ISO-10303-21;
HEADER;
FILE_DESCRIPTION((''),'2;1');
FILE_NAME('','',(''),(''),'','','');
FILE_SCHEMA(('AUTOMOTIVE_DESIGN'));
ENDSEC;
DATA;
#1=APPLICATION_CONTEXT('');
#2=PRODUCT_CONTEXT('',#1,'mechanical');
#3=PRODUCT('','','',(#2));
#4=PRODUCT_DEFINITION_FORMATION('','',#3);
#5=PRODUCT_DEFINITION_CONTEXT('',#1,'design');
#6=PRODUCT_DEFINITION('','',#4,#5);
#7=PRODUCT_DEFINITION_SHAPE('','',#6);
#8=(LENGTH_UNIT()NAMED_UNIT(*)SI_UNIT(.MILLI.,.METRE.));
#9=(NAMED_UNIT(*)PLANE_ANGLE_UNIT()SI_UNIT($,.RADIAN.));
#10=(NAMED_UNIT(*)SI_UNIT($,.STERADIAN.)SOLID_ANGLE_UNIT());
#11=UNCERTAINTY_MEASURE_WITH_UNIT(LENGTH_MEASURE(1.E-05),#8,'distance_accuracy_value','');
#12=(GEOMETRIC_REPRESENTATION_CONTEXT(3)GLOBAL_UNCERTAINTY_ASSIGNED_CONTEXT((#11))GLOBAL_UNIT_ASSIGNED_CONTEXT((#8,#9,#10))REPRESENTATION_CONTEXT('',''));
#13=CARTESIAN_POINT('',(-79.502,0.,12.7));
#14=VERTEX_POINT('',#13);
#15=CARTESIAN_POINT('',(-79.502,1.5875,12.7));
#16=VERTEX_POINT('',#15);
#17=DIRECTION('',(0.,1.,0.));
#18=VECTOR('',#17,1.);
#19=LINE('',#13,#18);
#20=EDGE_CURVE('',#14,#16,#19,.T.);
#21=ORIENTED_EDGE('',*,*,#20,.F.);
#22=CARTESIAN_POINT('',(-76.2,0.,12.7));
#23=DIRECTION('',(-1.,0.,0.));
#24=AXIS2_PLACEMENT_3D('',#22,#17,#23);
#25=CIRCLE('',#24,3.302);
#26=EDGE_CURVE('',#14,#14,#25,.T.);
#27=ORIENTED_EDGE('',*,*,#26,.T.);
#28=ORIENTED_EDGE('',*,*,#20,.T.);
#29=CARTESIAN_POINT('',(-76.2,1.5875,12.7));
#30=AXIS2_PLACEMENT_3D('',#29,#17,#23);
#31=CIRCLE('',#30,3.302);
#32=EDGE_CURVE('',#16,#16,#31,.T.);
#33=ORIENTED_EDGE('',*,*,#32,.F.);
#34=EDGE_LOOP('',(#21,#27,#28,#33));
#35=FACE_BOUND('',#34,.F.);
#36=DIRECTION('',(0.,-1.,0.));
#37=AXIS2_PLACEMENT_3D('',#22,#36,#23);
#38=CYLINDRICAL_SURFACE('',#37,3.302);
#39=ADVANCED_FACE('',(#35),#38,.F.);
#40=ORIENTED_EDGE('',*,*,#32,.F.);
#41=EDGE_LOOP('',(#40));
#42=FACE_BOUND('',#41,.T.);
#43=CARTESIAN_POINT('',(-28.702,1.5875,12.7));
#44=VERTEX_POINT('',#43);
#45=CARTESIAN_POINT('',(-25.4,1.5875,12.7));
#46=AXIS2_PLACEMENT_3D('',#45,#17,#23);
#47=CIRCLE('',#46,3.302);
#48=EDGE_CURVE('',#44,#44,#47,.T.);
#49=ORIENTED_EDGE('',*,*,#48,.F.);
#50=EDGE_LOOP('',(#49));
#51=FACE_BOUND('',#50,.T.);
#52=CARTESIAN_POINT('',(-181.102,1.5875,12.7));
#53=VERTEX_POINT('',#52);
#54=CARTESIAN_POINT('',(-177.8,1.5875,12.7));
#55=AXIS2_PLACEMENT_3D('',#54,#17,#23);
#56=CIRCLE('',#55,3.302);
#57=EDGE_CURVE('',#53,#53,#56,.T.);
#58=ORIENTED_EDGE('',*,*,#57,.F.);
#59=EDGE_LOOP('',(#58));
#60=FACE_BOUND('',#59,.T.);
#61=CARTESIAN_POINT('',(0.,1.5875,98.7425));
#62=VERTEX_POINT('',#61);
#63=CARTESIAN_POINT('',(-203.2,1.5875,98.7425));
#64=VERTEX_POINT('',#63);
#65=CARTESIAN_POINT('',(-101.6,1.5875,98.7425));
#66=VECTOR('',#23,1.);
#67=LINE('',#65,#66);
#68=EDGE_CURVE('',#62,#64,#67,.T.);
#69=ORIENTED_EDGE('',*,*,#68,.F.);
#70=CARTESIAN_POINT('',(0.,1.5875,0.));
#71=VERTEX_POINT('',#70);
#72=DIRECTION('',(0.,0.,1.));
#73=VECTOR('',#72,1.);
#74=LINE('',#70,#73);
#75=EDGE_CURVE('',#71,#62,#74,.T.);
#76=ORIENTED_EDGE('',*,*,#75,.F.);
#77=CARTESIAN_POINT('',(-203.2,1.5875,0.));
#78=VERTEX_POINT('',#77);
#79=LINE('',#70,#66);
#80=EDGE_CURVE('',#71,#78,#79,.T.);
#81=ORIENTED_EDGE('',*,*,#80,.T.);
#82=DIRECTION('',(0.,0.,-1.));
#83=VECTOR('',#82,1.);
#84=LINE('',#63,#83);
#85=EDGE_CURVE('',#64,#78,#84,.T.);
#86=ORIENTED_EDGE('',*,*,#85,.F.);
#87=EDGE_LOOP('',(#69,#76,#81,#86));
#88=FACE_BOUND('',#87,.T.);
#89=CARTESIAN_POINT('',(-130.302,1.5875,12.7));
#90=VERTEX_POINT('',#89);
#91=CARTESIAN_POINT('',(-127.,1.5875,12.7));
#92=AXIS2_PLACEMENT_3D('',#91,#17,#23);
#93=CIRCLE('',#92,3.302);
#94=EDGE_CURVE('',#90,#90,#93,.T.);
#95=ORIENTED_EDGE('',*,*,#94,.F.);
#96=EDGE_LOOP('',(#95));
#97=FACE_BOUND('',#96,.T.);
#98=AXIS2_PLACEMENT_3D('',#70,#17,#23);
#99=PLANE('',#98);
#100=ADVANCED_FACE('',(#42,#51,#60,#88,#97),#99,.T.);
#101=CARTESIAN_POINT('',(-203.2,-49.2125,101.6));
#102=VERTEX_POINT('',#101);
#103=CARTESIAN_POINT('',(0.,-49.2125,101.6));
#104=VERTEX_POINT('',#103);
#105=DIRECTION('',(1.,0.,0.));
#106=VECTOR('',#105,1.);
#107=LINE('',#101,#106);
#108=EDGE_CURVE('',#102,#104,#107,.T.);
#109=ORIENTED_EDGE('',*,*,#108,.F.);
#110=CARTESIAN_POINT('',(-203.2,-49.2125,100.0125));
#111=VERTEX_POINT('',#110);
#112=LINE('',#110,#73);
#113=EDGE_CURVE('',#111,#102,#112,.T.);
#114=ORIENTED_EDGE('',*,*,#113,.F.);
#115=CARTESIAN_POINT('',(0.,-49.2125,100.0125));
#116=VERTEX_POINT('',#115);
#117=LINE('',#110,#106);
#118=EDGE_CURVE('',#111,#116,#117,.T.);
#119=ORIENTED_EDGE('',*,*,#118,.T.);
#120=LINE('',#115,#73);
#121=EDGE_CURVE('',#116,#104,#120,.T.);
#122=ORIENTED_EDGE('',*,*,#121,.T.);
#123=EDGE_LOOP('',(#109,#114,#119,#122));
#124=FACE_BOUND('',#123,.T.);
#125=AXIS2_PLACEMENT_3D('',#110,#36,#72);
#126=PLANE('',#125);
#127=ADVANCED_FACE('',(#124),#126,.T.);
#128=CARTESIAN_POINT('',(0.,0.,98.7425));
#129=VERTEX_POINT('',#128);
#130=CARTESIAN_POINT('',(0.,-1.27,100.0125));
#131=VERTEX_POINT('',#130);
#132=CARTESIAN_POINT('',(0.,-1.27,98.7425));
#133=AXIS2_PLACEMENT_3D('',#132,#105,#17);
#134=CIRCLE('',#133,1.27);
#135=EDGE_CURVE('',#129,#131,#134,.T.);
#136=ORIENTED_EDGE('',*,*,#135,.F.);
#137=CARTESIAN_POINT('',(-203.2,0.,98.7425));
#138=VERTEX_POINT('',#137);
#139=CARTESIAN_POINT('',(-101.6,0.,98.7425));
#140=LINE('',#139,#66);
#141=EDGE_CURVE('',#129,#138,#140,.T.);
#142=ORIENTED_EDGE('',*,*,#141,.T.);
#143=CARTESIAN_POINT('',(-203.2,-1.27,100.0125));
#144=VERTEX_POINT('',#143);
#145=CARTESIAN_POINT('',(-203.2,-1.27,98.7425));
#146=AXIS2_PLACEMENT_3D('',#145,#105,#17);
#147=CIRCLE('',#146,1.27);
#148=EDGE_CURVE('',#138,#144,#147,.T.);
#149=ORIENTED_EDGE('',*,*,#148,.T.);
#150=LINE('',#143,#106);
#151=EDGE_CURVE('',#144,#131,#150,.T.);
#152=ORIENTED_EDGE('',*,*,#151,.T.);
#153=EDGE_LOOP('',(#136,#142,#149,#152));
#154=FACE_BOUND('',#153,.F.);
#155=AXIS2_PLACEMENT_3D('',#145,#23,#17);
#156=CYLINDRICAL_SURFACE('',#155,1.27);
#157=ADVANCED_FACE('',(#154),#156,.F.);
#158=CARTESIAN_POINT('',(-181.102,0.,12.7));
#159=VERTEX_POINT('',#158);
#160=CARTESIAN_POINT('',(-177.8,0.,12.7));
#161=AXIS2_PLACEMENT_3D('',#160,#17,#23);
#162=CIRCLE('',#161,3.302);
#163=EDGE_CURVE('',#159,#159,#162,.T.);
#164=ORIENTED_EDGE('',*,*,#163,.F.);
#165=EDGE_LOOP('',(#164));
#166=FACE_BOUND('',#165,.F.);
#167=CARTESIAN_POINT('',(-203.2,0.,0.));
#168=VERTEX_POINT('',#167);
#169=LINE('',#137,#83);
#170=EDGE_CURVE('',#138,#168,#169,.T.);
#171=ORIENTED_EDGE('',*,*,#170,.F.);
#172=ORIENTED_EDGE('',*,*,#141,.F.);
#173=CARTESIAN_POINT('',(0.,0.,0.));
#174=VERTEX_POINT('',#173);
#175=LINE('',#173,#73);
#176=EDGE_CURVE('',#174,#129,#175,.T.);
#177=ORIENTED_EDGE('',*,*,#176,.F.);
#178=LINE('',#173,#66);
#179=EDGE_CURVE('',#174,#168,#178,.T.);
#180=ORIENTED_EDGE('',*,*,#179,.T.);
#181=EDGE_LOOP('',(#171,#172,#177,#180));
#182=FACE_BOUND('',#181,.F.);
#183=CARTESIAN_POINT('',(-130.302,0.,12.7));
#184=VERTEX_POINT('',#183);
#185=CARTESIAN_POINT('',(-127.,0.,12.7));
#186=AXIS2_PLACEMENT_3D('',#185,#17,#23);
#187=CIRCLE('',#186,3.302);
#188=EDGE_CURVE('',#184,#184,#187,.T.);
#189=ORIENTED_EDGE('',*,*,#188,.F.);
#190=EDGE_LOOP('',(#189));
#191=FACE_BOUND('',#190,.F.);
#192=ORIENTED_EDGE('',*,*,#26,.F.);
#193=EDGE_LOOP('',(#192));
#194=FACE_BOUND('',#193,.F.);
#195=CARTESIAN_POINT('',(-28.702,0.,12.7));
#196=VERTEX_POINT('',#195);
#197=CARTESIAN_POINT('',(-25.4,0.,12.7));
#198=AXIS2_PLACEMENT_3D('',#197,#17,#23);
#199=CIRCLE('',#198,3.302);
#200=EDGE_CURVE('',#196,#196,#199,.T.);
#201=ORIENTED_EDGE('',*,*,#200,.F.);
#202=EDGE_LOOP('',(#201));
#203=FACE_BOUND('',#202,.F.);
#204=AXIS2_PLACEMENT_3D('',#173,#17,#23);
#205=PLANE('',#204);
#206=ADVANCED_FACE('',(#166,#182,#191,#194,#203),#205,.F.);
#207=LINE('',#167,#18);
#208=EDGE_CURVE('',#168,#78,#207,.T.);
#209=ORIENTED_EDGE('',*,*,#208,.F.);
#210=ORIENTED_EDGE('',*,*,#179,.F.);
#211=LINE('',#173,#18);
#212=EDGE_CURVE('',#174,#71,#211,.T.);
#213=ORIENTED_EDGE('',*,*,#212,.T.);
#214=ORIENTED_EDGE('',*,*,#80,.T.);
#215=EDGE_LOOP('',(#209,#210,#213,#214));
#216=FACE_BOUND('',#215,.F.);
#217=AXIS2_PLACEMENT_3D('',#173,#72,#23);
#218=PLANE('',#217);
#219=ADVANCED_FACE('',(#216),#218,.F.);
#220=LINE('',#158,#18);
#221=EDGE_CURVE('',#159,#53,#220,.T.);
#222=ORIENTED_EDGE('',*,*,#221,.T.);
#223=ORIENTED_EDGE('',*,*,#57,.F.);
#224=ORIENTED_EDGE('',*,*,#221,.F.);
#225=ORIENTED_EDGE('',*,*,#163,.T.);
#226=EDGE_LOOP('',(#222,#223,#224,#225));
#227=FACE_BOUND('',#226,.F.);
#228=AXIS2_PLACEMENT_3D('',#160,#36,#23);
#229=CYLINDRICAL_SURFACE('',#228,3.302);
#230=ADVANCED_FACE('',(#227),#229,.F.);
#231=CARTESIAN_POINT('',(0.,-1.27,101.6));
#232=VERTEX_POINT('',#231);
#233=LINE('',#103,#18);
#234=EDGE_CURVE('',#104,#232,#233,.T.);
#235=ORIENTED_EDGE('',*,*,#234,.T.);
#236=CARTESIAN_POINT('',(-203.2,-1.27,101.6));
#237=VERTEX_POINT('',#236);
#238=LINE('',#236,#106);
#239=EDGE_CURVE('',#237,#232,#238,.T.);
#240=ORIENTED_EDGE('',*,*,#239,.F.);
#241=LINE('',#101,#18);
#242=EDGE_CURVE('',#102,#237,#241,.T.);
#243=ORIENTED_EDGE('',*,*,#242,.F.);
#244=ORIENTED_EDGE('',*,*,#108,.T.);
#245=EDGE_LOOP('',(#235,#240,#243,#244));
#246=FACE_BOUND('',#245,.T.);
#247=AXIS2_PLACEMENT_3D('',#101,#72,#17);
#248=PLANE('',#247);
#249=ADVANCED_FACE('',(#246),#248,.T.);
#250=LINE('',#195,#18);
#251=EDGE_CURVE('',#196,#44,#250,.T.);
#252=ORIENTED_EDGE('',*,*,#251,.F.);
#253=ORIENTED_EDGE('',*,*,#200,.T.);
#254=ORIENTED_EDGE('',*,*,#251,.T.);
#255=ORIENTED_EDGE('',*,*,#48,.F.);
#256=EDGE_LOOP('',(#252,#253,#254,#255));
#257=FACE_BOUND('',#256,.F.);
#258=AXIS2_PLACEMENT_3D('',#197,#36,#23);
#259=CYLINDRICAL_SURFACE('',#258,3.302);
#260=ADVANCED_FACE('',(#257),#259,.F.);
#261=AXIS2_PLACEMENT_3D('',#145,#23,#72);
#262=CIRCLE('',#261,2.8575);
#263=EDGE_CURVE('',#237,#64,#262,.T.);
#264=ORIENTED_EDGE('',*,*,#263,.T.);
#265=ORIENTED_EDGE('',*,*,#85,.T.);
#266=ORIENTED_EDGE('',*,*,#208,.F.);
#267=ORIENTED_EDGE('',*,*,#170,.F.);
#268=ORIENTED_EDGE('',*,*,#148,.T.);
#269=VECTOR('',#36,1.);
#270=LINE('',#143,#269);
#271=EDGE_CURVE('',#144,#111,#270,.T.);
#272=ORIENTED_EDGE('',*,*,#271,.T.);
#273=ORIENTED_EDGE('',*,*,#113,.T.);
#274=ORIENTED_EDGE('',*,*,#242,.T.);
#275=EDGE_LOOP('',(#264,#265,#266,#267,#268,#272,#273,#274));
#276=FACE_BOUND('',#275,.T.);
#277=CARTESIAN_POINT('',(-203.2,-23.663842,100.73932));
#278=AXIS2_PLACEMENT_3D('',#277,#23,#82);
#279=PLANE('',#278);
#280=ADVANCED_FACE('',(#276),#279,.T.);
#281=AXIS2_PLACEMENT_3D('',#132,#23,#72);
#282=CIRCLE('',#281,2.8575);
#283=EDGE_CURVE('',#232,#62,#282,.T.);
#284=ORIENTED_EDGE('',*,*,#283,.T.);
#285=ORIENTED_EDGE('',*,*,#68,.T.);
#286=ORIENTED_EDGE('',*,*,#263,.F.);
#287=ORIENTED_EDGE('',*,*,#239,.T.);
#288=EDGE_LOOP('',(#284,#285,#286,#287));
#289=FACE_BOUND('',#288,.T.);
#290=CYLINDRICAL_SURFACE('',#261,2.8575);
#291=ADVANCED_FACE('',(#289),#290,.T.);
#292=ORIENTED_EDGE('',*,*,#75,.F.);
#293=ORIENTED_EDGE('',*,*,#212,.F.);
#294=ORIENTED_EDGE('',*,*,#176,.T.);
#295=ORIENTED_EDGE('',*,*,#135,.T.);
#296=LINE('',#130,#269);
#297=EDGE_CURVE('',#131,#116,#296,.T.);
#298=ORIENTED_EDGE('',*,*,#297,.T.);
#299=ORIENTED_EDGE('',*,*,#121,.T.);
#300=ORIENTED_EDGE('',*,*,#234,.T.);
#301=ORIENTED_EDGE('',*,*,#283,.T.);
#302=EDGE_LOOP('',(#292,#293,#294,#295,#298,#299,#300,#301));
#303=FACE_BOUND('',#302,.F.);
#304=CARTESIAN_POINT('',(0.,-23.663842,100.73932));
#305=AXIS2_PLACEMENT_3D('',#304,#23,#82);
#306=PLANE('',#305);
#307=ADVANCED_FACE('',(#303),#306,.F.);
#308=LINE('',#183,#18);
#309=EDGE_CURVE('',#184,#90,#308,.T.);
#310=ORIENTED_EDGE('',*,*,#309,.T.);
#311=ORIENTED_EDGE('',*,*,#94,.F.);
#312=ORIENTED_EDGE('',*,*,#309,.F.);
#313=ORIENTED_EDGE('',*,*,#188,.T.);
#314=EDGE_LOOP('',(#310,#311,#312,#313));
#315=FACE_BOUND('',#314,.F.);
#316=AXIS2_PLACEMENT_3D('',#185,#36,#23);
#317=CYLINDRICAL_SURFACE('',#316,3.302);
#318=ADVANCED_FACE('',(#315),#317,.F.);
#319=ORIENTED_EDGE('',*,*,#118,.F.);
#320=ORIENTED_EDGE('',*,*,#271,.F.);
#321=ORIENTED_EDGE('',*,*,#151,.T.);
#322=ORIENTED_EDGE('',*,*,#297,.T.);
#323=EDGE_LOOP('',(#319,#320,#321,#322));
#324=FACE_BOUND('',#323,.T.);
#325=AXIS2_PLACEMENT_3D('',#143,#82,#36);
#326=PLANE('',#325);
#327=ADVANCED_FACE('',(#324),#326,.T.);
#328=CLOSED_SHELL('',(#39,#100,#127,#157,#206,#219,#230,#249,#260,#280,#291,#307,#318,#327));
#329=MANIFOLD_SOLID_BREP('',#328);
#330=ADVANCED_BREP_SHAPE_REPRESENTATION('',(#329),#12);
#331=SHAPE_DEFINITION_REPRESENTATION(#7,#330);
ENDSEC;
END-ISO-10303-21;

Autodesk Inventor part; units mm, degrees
ref_plane "YZ Plane" through (0, 0, 0) normal (1, 0, 0) x (0, 1, 0)
ref_plane "XZ Plane" through (0, 0, 0) normal (0, 1, 0) x (-1, 0, 0)
ref_plane "XY Plane" through (0, 0, 0) normal (0, 0, 1) x (1, 0, 0)
sketch "Sketch1" plane through (0, 0, 0) normal (0, 1, 0) x (-1, 0, 0)
  line L0 (0, 0) -> (203.2, 0)
  line L1 (203.2, 0) -> (203.2, 25.4)
  line L2 (203.2, 25.4) -> (0, 25.4) construction
  line L3 (0, 25.4) -> (0, 0)
  line L4 (25.4, 12.7) -> (76.2, 12.7) construction
  circle A0 centre (25.4, 12.7) radius 3.302
  circle A1 centre (76.2, 12.7) radius 3.302
  line L5 (50.8, 25.4) -> (50.8, 0) construction
  circle A2 centre (127, 12.7) radius 3.302
  circle A3 centre (177.8, 12.7) radius 3.302
  line L6 (127, 12.7) -> (177.8, 12.7) construction
  line L7 (152.4, 25.4) -> (152.4, 0) construction
  line L8 (0, 25.4) -> (0, 101.6)
  line L9 (0, 101.6) -> (203.2, 101.6)
  line L10 (203.2, 101.6) -> (203.2, 25.4)
  point P0 (50.8, 12.7)
  point P1 (152.4, 12.7)
  dimension "d0" = 50.8
  dimension "d1" = 6.604
  dimension "d2" = 6.604
  dimension "d3" = 25.4
  dimension "d4" = 50.8
  dimension "d6" = 50.8
  dimension "d7" = 50.8
  dimension "d8" = 76.2
  dimension "d9" = 203.2
extrude "Plate1" add sketch "Sketch1" along normal blind 1.5875
sketch "Sketch2" plane through (-203.2, 1.5875, 100.0125) normal (0, 0, 1) x (1, 0, 0)
  line L0 (203.2, 0) -> (0, 0)
  line L1 (0, 0) -> (0, -50.8)
  line L2 (0, -50.8) -> (203.2, -50.8)
  line L3 (203.2, -50.8) -> (203.2, 0)
edge flange "Flange1" height 50.8 angle 90 thickness 1.5875 bend radius 1.27 thickness toward (0, 0, 1) relief tear relief width 1.5875 relief depth 0.7937 edges at (-101.6, 0, 101.6) wall of the first edge with corners at (0, 1.5875, 100.0125) (-203.2, 1.5875, 100.0125) (-203.2, -49.2125, 100.0125) (0, -49.2125, 100.0125)
bend "Bend1"
corner "Corner1"
equation "\"d11\" = BendReliefWidth"
equation "\"d12\" = BendReliefDepth"
equation "\"d13\" = MinimumRemnant"
equation "\"d14\" = BendRadius"
equation "\"d18\" = CornerReliefSize"
equation "\"d19\" = GapSize"
equation "\"d20\" = JacobiRadiusSize"
equation "\"BendRadius\" = Thickness"
equation "\"BendReliefWidth\" = Thickness"
equation "\"BendReliefDepth\" = 0.5 * Thickness"
equation "\"CornerReliefSize\" = 4 * Thickness"
equation "\"MinimumRemnant\" = 2 * Thickness"
equation "\"TransitionRadius\" = BendRadius"
equation "\"JacobiRadiusSize\" = BendRadius"
equation "\"GapSize\" = Thickness"
equation "\"d10\" = BendRadius"
equation "\"Thickness\" = 1.5875"
properties part number "Electrical Board Mount Part2" material "Aluminum 6061"
